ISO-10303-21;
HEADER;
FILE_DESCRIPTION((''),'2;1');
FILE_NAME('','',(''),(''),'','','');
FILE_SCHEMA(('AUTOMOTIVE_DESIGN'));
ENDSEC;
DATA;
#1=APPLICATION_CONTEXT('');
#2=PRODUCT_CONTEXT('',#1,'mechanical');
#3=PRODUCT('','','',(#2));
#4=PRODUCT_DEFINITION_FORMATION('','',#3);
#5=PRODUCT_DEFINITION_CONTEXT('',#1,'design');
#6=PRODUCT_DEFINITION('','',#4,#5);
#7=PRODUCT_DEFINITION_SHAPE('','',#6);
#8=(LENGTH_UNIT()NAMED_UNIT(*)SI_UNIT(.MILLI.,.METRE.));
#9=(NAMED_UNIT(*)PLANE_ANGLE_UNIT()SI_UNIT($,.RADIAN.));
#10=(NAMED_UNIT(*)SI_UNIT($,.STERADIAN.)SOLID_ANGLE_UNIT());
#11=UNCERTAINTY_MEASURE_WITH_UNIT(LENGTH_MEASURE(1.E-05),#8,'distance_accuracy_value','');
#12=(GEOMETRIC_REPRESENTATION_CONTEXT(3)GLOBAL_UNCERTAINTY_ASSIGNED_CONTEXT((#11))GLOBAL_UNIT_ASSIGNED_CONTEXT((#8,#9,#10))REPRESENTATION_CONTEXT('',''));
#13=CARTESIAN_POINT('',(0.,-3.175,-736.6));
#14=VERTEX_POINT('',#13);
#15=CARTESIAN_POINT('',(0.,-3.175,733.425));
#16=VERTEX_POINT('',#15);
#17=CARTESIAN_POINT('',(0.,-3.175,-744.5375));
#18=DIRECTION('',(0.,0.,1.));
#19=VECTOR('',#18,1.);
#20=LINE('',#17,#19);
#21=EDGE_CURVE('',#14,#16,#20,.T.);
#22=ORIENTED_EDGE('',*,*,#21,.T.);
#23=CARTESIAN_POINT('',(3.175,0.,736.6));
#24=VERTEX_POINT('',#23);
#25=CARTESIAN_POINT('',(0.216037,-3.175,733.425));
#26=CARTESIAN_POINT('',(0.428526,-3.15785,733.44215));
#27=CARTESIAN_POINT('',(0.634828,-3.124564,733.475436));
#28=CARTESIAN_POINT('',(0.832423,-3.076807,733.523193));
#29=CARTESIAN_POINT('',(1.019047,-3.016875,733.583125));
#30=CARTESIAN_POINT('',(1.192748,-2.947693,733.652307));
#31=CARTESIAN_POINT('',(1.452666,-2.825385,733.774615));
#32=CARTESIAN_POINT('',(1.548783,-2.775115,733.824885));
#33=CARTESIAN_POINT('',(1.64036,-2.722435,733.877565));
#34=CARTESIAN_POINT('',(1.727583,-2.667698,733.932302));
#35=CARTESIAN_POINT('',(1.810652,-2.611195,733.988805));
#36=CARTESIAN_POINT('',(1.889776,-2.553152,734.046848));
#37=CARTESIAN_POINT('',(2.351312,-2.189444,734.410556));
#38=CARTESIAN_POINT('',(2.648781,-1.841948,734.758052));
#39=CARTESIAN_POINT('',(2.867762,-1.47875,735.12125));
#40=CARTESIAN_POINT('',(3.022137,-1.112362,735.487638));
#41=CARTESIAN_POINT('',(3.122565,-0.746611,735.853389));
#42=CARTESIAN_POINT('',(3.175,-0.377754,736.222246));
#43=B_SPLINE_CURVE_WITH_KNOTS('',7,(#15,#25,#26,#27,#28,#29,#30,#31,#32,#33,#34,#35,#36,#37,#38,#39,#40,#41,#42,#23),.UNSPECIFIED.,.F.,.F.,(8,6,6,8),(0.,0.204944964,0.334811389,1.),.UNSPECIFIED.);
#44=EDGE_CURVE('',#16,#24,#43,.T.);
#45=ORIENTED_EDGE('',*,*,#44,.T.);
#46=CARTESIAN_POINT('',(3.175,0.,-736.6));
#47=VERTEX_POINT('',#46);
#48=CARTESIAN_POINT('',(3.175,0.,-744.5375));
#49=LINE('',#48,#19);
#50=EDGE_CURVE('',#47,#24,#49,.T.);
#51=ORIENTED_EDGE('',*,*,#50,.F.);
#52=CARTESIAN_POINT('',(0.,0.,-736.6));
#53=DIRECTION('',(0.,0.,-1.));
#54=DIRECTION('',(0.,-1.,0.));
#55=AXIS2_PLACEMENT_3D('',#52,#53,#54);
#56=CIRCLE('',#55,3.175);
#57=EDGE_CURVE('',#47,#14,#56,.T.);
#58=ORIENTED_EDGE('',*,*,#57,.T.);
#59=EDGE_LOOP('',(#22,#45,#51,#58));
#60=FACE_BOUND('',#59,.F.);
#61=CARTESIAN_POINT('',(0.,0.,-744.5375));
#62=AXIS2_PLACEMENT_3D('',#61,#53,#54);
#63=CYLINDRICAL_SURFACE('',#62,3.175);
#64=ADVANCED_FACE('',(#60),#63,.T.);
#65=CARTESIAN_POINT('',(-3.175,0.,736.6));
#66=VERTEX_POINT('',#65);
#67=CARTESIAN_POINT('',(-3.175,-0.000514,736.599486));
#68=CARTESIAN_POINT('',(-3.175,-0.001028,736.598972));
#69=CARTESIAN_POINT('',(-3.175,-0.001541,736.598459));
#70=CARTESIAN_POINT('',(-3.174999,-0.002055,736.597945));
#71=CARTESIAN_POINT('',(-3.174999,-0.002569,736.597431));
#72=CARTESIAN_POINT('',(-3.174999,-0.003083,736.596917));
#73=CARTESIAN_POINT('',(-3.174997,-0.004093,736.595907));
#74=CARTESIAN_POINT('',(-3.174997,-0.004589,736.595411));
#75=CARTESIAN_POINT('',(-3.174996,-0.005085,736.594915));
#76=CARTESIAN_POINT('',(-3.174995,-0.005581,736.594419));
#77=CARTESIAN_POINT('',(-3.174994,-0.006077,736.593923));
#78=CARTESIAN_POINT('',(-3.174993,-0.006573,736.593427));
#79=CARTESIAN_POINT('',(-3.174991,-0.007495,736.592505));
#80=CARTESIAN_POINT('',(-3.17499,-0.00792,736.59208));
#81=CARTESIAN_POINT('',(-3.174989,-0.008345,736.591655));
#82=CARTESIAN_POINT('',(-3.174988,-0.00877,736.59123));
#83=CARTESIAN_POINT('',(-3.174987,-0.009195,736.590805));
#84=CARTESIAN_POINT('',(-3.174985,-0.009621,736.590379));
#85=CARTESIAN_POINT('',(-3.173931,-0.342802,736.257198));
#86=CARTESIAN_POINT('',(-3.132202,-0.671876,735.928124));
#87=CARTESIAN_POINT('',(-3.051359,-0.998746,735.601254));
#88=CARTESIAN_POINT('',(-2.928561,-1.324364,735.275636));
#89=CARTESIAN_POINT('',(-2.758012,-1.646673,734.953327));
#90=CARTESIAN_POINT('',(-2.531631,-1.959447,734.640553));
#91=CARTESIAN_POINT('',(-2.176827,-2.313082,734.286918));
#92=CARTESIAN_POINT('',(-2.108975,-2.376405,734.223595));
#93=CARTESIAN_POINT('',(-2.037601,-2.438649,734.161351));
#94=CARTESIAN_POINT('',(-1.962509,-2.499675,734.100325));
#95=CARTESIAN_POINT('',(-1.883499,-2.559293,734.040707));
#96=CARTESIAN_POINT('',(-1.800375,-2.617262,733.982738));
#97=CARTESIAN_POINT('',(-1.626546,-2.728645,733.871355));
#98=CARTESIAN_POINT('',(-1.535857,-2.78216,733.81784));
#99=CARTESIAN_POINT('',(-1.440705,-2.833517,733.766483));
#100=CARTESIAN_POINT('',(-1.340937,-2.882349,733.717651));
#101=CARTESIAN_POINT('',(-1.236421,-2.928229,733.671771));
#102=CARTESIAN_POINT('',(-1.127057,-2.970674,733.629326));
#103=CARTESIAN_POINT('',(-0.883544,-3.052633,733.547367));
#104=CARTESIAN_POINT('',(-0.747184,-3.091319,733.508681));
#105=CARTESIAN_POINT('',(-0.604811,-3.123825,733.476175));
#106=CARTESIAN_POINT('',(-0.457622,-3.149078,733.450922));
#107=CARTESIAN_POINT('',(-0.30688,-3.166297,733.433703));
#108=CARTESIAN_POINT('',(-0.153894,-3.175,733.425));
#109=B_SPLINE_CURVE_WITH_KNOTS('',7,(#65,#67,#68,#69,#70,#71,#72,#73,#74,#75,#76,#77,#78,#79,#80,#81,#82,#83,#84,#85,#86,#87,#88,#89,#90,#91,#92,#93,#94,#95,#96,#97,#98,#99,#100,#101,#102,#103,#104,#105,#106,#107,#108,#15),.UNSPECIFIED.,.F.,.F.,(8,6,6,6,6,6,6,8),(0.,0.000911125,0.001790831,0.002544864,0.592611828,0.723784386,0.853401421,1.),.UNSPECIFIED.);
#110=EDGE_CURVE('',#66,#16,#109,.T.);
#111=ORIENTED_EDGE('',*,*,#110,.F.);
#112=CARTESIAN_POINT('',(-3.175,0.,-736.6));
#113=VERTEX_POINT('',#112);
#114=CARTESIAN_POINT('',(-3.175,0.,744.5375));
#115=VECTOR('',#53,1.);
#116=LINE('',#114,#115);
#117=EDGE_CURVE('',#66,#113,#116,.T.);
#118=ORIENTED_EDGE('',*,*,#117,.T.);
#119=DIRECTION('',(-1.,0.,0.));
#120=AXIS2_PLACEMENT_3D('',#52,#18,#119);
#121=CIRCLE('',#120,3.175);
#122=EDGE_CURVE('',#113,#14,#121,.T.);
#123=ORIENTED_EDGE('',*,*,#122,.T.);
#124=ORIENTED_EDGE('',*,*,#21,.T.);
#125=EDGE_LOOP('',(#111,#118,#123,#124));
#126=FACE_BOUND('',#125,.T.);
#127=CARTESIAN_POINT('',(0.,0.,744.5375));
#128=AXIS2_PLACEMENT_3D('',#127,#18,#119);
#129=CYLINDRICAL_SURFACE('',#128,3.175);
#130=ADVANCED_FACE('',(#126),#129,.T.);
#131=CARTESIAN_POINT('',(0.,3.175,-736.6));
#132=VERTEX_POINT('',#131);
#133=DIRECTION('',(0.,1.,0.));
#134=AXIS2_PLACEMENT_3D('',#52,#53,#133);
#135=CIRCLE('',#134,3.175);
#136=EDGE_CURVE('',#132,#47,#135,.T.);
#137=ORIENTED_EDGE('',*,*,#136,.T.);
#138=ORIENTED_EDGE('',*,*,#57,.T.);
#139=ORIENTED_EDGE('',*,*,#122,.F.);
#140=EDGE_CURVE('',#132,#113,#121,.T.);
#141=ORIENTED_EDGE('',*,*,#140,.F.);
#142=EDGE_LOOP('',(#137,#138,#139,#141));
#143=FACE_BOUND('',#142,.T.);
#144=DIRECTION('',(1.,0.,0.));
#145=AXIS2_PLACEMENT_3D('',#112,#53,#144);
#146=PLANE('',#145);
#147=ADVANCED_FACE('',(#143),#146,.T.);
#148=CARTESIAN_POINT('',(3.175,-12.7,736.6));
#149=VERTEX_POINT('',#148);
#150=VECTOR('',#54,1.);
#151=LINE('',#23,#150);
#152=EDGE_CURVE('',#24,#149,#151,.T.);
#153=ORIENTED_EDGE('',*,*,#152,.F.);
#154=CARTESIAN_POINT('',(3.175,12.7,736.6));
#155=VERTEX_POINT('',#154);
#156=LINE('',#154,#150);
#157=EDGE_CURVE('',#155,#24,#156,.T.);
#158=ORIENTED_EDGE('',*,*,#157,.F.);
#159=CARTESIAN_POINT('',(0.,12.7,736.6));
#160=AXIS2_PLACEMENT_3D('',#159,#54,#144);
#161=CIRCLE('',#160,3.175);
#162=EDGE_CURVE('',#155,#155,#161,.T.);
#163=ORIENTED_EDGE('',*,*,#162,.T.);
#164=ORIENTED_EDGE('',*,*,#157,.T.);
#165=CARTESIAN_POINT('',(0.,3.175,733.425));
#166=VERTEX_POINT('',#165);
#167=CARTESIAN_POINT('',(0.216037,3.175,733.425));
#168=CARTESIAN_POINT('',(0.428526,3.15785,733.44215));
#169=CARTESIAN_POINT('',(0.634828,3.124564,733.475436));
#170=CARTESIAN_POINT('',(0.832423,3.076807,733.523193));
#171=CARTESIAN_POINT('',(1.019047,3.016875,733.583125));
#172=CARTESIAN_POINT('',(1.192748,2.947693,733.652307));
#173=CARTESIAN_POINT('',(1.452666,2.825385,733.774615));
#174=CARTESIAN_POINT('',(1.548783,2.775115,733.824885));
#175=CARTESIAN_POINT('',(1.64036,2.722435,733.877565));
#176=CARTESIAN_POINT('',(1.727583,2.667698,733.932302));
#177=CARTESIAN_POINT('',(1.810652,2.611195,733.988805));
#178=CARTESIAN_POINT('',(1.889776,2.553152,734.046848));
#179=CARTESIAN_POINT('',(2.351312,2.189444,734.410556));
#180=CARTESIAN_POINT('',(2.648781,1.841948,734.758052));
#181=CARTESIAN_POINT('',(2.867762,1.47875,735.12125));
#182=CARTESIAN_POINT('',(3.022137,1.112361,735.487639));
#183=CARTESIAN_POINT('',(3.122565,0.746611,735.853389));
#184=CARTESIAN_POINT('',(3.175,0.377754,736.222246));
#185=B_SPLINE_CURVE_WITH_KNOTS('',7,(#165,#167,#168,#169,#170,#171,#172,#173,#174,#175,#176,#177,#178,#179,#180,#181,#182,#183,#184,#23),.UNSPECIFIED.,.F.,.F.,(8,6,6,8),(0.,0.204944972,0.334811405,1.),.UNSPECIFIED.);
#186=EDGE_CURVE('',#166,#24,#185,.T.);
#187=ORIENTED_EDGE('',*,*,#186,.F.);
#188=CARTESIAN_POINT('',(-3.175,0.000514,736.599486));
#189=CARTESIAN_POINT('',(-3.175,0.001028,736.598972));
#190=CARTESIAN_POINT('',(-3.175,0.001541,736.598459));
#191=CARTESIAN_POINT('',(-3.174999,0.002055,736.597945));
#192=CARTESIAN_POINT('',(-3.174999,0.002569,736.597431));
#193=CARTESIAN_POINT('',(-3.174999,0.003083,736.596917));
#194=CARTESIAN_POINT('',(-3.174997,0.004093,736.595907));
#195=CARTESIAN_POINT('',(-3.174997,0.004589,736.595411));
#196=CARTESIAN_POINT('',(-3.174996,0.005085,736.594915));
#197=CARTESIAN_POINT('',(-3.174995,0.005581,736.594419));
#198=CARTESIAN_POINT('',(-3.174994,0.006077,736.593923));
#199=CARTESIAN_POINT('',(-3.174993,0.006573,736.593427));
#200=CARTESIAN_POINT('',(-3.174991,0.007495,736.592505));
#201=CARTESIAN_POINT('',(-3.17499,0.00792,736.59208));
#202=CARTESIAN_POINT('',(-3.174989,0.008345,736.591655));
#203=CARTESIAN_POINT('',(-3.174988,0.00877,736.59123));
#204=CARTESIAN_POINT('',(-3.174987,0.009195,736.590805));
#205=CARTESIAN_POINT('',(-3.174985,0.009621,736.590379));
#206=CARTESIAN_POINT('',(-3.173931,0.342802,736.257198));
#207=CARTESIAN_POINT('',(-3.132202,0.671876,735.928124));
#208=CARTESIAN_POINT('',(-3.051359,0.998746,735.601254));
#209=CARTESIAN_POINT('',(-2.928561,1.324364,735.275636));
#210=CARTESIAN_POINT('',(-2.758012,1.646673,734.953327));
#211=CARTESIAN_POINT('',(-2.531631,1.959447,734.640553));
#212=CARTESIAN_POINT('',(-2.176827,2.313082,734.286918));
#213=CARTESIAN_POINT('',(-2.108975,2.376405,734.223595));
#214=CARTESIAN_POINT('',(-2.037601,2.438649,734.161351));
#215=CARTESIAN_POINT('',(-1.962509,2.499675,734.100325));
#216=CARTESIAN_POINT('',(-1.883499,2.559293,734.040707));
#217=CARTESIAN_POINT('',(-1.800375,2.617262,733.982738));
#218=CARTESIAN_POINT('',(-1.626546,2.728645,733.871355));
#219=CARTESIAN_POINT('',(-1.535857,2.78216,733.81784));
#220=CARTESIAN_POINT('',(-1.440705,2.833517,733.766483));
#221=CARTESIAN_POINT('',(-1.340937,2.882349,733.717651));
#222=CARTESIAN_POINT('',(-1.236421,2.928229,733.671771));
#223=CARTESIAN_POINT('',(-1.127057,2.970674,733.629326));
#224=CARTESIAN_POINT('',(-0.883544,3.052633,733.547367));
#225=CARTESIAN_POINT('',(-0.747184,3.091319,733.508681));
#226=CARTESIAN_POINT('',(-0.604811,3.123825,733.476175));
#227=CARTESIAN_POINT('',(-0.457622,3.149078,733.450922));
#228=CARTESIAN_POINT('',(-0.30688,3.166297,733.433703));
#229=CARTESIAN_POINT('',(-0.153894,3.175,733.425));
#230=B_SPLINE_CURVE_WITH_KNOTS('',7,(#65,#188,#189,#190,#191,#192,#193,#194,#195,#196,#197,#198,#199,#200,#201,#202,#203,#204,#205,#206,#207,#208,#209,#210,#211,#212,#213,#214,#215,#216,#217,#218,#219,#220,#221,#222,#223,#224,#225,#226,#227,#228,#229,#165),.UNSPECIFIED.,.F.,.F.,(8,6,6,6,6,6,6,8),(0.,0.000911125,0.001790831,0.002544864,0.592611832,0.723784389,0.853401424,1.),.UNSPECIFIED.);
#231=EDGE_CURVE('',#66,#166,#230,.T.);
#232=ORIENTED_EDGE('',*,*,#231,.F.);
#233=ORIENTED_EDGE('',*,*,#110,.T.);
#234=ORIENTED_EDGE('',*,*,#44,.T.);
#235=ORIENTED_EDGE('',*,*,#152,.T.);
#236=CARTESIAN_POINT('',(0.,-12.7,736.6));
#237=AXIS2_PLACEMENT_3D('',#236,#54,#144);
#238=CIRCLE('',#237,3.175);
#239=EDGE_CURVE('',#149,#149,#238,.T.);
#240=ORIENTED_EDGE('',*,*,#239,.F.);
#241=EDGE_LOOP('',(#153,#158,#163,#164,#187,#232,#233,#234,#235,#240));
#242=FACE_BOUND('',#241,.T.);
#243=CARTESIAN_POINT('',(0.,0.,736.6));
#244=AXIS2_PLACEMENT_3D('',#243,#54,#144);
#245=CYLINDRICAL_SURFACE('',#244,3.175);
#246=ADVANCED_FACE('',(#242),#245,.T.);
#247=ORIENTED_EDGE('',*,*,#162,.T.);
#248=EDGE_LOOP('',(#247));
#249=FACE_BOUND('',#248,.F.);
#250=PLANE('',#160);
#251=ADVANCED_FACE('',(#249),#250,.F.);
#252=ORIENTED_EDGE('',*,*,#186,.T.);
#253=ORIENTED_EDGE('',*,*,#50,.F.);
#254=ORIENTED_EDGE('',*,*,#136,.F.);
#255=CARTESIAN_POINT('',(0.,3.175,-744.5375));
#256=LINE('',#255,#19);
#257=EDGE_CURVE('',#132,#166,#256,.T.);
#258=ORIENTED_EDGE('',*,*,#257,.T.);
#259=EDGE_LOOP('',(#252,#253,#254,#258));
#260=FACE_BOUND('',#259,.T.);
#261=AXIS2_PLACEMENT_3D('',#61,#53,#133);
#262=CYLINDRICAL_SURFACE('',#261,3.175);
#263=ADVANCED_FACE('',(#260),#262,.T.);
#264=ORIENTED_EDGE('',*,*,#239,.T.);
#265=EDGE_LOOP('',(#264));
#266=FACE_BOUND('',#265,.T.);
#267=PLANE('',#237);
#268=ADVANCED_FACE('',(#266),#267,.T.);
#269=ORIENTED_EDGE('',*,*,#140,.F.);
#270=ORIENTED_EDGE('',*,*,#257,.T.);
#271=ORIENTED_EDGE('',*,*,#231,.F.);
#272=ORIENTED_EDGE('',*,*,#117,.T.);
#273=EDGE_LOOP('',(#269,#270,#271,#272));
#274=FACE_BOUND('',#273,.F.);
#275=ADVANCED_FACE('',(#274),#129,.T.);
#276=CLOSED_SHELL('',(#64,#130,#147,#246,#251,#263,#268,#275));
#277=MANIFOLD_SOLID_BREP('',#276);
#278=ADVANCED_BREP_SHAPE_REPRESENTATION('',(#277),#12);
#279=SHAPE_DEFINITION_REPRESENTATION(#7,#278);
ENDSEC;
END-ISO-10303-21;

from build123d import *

# Parameters (mm, degrees)
F0_W         = 6.35
F0_H         = 6.35
F0_H_2       = 1466.85
F1_DEPTH     = 3.175
F2_R         = 3.175
F3_DEPTH     = 12.7
F4_T3_DEPTH  = 1489.075
F4_S4_R      = 3.175
F4_T5_DEPTH  = 746
F4_T8_DEPTH  = 1489.075
F4_S9_R      = 3.175
F4_T10_DEPTH = 746
F4_T13_DEPTH = 1489.075
F4_S14_R     = 3.175
F4_T15_DEPTH = 746
F4_T18_DEPTH = 1489.075
F4_S19_R     = 3.175
F4_T20_DEPTH = 746


# Not quite as in the source:
# - a fillet or chamfer that OpenCascade refuses, or shapes differently, is made with other operations: its cross-section is extruded or revolved along the edge and cut away or added


with BuildPart() as f1:
    # F0 (on Front) → F1 (new body, symmetric)
    with BuildSketch(Plane.XZ):
        with Locations((0, 733.425)):
            Rectangle(F0_W, F0_H)
        with Locations((0, -3.175)):
            Rectangle(F0_W, F0_H_2)
    extrude(amount=F1_DEPTH, both=True)

    # F2 (on Front) → F3 (join, symmetric)
    with BuildSketch(Plane.XZ):
        with Locations((0, 736.6)):
            Circle(F2_R)
    extrude(amount=F3_DEPTH, both=True)

    # F4: fillet of radius 3.175 on 4 edges, made by hand


with BuildPart() as f4_tool1:
    # F4_s2 → F4_t3 (new body)
    with BuildSketch(Plane.XY.offset(-744.5375)):
        with BuildLine():
            ThreePointArc((0, -3.175), (2.2450640303, -2.2450640303), (3.175, 0))
            Line((3.175, 0), (3.175, -3.175))
            Line((3.175, -3.175), (0, -3.175))
        make_face()
    extrude(amount=F4_T3_DEPTH)

    # F4_s4 → F4_t5 (cut, symmetric)
    with BuildSketch(Plane.XZ.offset(1.6)):
        with Locations((0, 736.6)):
            Circle(F4_S4_R)
    extrude(amount=F4_T5_DEPTH, both=True, mode=Mode.SUBTRACT)


with BuildPart() as f4_tool6:
    # F4_s7 → F4_t8 (new body)
    with BuildSketch(Plane.XY.offset(-744.5375)):
        with BuildLine():
            ThreePointArc((0, 3.175), (2.2450640303, 2.2450640303), (3.175, 0))
            Line((3.175, 0), (3.175, 3.175))
            Line((3.175, 3.175), (0, 3.175))
        make_face()
    extrude(amount=F4_T8_DEPTH)

    # F4_s9 → F4_t10 (cut, symmetric)
    with BuildSketch(Plane.XZ.offset(-1.6)):
        with Locations((0, 736.6)):
            Circle(F4_S9_R)
    extrude(amount=F4_T10_DEPTH, both=True, mode=Mode.SUBTRACT)


with BuildPart() as f4_tool11:
    # F4_s12 → F4_t13 (new body)
    with BuildSketch(Plane.XY.offset(744.5375)):
        with BuildLine():
            ThreePointArc((-3.175, 0), (-2.2450640303, 2.2450640303), (0, 3.175))
            Line((0, 3.175), (-3.175, 3.175))
            Line((-3.175, 3.175), (-3.175, 0))
        make_face()
    extrude(amount=-F4_T13_DEPTH)

    # F4_s14 → F4_t15 (cut, symmetric)
    with BuildSketch(Plane.XZ.offset(-1.6)):
        with Locations((0, 736.6)):
            Circle(F4_S14_R)
    extrude(amount=F4_T15_DEPTH, both=True, mode=Mode.SUBTRACT)


with BuildPart() as f4_tool16:
    # F4_s17 → F4_t18 (new body)
    with BuildSketch(Plane.XY.offset(744.5375)):
        with BuildLine():
            ThreePointArc((-3.175, 0), (-2.2450640303, -2.2450640303), (0, -3.175))
            Line((0, -3.175), (-3.175, -3.175))
            Line((-3.175, -3.175), (-3.175, 0))
        make_face()
    extrude(amount=-F4_T18_DEPTH)

    # F4_s19 → F4_t20 (cut, symmetric)
    with BuildSketch(Plane.XZ.offset(1.6)):
        with Locations((0, 736.6)):
            Circle(F4_S19_R)
    extrude(amount=F4_T20_DEPTH, both=True, mode=Mode.SUBTRACT)


with BuildPart() as f1_1:
    add(f1.part)

    # F4_t21: cut F4_tool1, F4_tool6, F4_tool11, F4_tool16
    add([f4_tool1.part, f4_tool6.part, f4_tool11.part, f4_tool16.part], mode=Mode.SUBTRACT)


solid = f1_1.part
